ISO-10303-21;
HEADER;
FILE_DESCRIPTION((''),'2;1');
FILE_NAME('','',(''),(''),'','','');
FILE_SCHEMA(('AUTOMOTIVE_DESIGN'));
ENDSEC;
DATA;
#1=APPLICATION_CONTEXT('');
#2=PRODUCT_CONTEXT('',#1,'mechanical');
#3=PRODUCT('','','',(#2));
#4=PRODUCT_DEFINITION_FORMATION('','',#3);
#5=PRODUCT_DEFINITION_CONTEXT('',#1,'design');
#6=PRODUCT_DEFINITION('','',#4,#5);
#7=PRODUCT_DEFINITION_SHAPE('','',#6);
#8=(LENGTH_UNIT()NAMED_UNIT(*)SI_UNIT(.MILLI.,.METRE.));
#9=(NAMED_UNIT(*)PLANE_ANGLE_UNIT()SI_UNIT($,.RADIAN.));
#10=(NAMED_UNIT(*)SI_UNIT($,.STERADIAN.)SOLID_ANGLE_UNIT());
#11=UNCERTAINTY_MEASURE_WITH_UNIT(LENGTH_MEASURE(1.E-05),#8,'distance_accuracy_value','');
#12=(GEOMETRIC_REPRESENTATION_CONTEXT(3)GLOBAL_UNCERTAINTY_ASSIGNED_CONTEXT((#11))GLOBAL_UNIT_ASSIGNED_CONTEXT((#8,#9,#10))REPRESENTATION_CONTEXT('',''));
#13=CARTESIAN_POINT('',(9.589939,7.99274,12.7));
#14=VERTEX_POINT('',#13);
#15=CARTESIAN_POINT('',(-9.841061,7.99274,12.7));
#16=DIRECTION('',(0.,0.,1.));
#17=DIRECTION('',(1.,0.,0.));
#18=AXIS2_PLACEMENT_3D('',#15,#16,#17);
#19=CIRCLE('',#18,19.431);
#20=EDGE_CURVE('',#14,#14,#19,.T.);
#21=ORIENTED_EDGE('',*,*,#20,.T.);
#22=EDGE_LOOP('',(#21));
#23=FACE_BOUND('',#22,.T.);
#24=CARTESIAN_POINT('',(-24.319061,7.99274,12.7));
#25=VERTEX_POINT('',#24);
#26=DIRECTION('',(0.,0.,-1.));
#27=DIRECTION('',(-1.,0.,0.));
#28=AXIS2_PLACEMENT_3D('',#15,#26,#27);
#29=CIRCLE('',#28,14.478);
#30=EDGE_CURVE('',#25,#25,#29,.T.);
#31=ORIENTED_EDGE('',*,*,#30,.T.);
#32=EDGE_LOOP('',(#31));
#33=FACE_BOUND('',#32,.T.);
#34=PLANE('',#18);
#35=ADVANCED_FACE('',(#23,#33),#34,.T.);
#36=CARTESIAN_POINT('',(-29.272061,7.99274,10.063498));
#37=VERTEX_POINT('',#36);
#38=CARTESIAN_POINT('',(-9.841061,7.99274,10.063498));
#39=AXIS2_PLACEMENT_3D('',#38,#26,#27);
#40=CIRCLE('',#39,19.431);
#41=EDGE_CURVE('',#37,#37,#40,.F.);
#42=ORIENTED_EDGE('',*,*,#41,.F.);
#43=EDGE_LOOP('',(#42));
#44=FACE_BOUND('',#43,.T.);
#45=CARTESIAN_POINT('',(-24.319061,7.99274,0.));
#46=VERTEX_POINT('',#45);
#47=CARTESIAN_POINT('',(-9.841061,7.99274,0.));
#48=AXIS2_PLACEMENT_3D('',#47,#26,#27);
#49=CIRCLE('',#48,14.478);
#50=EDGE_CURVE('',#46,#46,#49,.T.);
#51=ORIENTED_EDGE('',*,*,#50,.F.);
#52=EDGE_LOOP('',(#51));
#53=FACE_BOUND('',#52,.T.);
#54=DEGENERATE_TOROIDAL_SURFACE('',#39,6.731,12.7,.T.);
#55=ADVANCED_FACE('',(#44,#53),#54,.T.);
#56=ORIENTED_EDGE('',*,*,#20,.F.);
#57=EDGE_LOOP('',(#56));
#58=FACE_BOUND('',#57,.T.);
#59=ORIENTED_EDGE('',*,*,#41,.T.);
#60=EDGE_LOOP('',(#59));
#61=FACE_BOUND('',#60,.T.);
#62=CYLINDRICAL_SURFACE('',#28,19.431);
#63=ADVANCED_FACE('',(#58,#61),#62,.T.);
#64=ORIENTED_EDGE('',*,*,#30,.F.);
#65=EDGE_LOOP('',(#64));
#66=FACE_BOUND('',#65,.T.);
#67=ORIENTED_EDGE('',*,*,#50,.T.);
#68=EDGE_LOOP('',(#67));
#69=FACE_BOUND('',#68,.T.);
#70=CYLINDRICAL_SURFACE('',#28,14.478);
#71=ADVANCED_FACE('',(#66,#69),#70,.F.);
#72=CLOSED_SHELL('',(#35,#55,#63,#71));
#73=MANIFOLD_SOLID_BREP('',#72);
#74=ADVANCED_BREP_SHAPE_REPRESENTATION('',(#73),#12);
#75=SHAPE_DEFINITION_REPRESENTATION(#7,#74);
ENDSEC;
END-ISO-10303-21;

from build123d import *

# Parameters (mm, degrees)
SKETCH2_R           = 19.431
BOSS_EXTRUDE1_DEPTH = 12.7
SKETCH4_R           = 14.478
CUT_EXTRUDE1_DEPTH  = 12.7
FILLET2_R           = 12.7


with BuildPart() as part:
    # Sketch2 → Boss-Extrude1 (new body)
    with BuildSketch(Plane.XY):
        with Locations((-9.841060776, 7.992739717)):
            Circle(SKETCH2_R)
    extrude(amount=BOSS_EXTRUDE1_DEPTH)

    # Sketch4 → Cut-Extrude1 (cut)
    with BuildSketch(Plane(origin=(0, 0, 0), x_dir=(-1, 0, 0), z_dir=(0, 0, -1))):
        with Locations((9.841060776, 7.992739717)):
            Circle(SKETCH4_R)
    extrude(amount=-CUT_EXTRUDE1_DEPTH, mode=Mode.SUBTRACT)

    # Fillet2
    # the kernel refuses this fillet: 12.7 mm, written as the material it takes off along each edge
    with BuildSketch(Plane(origin=(-9.841060776, 7.992739717, 0), x_dir=(1, 0, 0), z_dir=(0, -1, 0))) as fillet2_piece_1:
        with BuildLine():
            CenterArc((6.731, 10.063497951), FILLET2_R, 307.589502965, 52.410497035)
            Line((14.478, 0), (14.63294, -0.201269959))
            ThreePointArc((14.63294, -0.201269959), (16.9545, -0.254), (19.431, -0.254))
            Line((19.431, -0.254), (19.685, 0))
            Line((19.685, 0), (19.685, 10.063497951))
            Line((19.685, 10.063497951), (19.431, 10.063497951))
        make_face()
    revolve(axis=Axis((-9.841060776, 7.992739717, 0), (0, 0, 1)), mode=Mode.SUBTRACT)


solid = part.part
